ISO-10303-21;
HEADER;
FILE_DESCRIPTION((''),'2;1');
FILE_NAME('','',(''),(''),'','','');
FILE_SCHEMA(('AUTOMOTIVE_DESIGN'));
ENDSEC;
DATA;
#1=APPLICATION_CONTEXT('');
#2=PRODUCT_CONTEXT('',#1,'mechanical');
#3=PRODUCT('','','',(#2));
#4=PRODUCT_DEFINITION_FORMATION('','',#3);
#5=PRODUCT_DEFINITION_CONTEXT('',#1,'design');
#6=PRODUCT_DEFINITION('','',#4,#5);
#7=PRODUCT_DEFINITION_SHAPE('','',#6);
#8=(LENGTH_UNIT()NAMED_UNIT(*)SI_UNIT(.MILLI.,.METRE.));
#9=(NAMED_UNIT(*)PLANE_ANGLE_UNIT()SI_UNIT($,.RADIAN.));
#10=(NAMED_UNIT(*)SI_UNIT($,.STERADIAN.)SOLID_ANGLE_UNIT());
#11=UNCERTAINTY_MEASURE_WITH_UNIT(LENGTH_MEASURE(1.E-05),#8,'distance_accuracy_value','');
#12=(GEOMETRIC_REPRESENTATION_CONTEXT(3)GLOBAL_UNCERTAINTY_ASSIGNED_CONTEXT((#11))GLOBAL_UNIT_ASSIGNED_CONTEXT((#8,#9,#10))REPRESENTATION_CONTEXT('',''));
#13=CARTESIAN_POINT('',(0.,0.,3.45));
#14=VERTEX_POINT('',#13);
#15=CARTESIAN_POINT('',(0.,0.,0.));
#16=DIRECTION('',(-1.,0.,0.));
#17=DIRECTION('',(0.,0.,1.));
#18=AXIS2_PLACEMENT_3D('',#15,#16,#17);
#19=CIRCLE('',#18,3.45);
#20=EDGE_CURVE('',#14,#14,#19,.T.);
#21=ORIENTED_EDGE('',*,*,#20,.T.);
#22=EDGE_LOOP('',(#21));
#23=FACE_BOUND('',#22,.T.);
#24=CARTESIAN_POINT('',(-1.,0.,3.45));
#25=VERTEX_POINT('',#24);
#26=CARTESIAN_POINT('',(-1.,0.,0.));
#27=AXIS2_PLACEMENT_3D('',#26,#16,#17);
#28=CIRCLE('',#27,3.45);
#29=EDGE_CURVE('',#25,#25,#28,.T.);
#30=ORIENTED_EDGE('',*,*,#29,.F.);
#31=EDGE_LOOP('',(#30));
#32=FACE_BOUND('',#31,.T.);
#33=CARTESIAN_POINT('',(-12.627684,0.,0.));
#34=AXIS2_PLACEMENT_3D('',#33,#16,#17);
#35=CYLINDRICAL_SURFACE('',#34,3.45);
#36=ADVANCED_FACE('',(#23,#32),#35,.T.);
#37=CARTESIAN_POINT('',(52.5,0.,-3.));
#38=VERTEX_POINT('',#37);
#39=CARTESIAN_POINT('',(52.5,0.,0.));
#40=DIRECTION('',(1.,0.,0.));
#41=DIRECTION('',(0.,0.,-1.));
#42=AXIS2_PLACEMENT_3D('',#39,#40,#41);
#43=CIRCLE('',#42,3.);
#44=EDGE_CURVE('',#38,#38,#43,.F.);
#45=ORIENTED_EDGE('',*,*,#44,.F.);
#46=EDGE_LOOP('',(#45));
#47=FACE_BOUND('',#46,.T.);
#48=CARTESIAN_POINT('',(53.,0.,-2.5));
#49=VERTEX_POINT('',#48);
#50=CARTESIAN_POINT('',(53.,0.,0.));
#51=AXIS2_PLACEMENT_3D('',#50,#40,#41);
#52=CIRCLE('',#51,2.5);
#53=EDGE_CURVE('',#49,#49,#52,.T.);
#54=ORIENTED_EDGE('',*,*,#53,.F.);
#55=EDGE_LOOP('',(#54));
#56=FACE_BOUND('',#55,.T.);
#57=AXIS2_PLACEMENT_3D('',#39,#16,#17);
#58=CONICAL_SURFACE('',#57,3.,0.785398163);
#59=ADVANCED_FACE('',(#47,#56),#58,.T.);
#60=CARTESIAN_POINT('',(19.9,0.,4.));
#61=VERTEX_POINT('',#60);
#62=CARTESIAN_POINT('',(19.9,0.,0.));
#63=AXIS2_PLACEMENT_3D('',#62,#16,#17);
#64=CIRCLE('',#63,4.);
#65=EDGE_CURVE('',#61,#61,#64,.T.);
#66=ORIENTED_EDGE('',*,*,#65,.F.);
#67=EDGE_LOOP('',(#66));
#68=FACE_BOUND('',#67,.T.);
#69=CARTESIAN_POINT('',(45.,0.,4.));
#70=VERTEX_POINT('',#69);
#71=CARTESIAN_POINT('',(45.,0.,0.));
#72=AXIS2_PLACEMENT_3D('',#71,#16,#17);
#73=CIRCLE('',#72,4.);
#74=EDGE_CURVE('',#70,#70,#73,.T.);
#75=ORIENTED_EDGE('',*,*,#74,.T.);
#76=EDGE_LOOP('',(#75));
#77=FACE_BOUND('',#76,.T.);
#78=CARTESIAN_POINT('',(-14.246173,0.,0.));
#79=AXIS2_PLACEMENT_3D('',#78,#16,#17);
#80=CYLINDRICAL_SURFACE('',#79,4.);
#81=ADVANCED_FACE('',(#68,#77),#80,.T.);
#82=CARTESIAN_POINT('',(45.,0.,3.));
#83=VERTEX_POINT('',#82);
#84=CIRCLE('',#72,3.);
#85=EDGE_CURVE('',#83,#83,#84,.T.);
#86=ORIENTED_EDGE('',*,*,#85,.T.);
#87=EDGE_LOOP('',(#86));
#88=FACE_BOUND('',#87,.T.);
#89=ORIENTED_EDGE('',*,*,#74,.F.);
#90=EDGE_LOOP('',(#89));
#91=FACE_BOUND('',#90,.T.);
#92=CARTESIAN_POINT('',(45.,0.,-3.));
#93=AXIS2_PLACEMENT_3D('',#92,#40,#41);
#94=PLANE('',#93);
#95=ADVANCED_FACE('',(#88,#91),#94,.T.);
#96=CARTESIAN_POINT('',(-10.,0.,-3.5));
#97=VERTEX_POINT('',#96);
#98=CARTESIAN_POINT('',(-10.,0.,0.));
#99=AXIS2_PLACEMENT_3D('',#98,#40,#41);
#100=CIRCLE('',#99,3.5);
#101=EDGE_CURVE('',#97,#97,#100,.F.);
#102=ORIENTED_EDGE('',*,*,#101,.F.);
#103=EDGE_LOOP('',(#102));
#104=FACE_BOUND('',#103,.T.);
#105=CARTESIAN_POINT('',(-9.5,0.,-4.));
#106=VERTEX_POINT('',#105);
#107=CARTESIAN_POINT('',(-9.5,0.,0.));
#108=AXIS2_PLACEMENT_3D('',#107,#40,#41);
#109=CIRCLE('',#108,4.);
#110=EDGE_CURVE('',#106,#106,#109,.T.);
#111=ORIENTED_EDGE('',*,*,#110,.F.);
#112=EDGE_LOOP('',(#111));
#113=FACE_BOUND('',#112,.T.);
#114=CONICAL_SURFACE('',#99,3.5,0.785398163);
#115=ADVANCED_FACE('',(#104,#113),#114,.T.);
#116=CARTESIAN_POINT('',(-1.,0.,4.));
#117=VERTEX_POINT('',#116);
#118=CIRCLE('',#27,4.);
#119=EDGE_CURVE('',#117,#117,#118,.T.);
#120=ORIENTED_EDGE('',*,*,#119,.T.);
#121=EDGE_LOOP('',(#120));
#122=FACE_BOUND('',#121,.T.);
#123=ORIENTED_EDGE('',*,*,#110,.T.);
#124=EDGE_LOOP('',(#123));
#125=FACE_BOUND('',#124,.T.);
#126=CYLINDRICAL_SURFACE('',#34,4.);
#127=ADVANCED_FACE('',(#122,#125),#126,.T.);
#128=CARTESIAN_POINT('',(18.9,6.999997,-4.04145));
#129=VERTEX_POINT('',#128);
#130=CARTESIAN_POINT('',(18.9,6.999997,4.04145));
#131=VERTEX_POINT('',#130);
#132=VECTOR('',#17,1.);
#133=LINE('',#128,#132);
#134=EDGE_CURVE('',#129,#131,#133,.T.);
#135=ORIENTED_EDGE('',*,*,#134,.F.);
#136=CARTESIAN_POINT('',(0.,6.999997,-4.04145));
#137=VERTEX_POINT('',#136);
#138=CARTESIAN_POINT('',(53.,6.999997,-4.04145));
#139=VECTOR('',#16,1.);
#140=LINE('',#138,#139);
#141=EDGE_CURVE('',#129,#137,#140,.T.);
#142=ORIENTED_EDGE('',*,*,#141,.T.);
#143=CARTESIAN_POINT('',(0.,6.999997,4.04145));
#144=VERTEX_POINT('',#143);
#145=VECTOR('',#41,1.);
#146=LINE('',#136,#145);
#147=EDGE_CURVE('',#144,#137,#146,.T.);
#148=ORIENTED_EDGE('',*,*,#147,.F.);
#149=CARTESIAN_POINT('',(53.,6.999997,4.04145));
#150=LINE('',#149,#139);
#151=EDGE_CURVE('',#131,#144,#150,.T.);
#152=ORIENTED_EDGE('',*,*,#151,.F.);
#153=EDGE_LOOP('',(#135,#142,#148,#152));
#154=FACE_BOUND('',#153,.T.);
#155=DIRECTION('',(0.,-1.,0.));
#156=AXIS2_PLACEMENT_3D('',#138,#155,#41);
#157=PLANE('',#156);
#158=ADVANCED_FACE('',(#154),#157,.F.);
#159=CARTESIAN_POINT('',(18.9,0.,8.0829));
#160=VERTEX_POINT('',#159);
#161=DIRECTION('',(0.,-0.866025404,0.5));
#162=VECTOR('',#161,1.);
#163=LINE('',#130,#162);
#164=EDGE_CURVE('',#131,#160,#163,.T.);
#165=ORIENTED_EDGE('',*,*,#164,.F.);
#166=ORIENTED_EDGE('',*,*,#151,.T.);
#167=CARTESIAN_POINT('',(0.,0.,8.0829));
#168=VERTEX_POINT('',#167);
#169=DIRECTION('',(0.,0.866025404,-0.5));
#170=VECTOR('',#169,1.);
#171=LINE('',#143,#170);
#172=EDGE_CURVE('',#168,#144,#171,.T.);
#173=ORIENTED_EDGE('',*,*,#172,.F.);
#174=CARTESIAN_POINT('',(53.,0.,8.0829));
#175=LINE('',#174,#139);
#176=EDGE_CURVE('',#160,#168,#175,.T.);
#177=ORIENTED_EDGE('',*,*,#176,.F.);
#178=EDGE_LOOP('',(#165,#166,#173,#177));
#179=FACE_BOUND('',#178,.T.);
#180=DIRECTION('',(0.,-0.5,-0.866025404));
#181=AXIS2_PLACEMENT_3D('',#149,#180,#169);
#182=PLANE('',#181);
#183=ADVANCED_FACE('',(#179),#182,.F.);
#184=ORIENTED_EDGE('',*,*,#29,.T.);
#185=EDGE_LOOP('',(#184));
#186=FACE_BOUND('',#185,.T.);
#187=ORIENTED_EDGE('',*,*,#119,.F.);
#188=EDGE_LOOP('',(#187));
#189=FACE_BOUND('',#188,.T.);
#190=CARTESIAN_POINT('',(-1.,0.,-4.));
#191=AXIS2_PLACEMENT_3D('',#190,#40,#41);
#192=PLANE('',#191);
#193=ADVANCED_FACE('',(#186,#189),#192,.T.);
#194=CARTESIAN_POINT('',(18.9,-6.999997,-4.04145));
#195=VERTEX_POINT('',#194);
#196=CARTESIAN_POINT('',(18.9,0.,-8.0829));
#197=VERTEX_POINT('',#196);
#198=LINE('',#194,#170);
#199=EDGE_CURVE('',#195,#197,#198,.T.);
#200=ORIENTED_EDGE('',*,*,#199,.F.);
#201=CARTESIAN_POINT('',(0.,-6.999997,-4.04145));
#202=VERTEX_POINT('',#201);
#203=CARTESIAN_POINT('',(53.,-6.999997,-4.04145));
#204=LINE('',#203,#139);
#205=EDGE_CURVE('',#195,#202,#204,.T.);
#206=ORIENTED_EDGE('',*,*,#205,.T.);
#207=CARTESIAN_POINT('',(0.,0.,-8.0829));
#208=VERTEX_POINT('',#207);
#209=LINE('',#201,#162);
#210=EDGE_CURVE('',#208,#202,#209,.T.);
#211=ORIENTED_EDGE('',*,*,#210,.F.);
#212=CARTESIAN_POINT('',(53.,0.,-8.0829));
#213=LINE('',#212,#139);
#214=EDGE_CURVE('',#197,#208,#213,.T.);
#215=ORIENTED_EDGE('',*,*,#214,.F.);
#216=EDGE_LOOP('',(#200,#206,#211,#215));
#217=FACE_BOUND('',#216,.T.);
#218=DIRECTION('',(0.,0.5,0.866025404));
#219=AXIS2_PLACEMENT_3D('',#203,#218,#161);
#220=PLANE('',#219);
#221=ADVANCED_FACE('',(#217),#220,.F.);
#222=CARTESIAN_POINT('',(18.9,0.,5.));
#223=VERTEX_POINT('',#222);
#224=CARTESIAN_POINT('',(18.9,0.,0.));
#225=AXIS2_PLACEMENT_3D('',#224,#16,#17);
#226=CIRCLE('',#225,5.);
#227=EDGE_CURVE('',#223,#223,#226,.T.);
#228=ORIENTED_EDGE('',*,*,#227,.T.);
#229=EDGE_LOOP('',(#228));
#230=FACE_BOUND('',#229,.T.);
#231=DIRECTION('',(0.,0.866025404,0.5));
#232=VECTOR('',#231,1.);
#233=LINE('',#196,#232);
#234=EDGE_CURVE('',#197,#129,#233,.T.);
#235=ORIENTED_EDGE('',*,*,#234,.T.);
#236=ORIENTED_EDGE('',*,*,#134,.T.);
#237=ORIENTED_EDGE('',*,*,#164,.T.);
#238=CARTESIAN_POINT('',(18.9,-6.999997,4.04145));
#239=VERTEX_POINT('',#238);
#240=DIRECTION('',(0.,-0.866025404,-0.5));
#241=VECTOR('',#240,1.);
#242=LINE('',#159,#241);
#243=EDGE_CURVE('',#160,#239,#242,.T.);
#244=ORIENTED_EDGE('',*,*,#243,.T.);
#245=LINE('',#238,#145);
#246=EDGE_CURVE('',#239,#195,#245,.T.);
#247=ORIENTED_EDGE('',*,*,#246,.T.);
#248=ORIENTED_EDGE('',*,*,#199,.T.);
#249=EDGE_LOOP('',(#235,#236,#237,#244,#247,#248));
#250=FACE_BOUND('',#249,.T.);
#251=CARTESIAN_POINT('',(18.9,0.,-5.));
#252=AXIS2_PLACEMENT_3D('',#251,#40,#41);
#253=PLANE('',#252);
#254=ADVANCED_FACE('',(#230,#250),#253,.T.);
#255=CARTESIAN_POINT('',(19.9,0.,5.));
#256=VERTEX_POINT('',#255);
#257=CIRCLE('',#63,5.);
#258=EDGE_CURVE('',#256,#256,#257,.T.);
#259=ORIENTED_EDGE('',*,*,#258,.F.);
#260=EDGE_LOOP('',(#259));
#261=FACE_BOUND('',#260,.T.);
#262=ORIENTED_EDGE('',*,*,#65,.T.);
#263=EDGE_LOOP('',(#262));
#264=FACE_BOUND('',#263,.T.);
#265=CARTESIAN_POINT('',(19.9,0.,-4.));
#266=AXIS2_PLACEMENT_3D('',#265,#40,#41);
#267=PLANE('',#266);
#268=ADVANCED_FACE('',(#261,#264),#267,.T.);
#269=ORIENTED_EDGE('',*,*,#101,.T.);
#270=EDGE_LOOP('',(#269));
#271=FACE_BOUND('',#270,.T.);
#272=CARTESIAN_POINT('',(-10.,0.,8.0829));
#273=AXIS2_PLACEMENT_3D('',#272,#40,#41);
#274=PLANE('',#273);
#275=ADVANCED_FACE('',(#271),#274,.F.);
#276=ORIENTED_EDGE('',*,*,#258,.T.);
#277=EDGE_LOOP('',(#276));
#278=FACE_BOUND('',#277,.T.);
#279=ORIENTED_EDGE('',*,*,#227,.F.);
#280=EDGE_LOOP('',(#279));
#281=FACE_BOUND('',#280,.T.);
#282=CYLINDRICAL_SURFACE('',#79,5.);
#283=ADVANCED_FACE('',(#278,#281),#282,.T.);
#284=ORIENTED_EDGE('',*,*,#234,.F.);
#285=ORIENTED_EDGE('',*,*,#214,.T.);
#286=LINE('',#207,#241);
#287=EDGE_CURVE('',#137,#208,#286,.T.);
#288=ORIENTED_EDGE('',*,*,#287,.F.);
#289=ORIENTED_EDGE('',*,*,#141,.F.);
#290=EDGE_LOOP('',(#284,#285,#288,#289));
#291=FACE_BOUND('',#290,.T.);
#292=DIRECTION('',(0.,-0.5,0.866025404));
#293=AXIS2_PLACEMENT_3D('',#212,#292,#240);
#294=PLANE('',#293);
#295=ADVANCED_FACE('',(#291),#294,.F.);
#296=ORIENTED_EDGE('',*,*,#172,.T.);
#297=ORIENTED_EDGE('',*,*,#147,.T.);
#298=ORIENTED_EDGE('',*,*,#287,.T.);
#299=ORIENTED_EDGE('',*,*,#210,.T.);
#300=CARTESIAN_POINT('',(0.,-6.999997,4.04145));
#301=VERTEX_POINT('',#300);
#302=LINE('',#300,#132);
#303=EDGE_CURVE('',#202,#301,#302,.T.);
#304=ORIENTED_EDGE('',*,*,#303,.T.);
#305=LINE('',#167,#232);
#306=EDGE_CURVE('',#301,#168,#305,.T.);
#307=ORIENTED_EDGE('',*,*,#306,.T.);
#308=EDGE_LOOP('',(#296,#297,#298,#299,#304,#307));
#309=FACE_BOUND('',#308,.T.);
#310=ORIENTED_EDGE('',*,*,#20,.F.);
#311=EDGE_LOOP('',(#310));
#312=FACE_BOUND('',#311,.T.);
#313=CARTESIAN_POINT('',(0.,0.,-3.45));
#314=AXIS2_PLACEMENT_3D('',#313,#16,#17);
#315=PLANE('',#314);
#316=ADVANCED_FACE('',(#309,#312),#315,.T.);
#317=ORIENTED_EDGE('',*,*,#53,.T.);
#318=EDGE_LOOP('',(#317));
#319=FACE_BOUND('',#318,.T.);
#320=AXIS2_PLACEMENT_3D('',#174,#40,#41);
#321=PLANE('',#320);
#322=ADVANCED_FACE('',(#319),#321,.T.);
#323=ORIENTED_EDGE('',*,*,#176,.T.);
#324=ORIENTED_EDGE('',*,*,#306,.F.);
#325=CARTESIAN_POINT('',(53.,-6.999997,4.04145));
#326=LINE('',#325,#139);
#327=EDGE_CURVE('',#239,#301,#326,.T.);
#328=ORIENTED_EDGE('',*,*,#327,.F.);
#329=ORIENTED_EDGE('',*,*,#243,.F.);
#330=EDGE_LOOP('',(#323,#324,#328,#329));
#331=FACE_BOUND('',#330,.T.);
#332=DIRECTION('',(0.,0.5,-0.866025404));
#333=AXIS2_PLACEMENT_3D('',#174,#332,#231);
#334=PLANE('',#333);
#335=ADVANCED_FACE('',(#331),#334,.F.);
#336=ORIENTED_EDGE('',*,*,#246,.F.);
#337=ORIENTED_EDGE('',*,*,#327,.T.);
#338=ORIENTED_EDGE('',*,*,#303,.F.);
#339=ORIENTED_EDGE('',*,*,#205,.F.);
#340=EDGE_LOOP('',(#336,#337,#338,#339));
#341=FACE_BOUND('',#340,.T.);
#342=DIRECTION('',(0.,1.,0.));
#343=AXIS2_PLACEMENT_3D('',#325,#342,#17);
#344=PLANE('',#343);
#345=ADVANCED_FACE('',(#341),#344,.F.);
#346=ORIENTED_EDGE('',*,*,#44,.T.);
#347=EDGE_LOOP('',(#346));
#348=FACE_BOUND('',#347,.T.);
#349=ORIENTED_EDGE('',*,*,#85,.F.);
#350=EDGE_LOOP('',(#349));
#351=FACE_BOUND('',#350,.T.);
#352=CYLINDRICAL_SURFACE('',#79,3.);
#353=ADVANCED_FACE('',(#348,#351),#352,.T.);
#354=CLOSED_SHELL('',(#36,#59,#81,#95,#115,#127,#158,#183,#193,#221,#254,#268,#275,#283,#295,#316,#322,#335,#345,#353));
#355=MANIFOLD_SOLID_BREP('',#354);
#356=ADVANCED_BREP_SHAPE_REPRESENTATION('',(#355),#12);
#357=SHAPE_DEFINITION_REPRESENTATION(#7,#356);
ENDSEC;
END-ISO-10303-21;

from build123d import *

# Parameters (mm, degrees)
BOSS_EXTRUDE1_START = -10
BOSS_EXTRUDE1_DEPTH = 63
CHAMFER1_SIZE       = 0.5


# Read off the part's stored shape, not the designer's step: Boss-Extrude1
with BuildPart() as part:
    # Boss-Extrude1 outline → Boss-Extrude1 (new body)
    with BuildSketch(Plane(origin=(0, 0, 0), x_dir=(0, 0, -1), z_dir=(1, 0, 0)).offset(BOSS_EXTRUDE1_START)):
        Polygon((-4.04145, 6.999996736), (-8.0829, 0), (-4.04145, -6.999996736), (4.04145, -6.999996736), (8.0829, 0), (4.04145, 6.999996736), align=None)
    extrude(amount=BOSS_EXTRUDE1_DEPTH)

    # Sketch2 → Cut-Revolve1 (revolve, cut)
    with BuildSketch(Plane(origin=(0, 0, 0), x_dir=(1, 0, 0), z_dir=(0, 1, 0)), mode=Mode.PRIVATE) as cut_revolve1_sk:
        Polygon((0, 8.0829), (-10, 8.0829), (-10, 4), (-1, 4), (-1, 3.45), (0, 3.45), align=None)
    revolve(cut_revolve1_sk.sketch.rotate(Axis((-12.627683811, 0, 0), (1, 0, 0)), 180), axis=Axis((-12.627683811, 0, 0), (1, 0, 0)), mode=Mode.SUBTRACT)

    # Sketch3 → Cut-Revolve2 (revolve, cut)
    with BuildSketch(Plane(origin=(0, 0, 0), x_dir=(1, 0, 0), z_dir=(0, 1, 0)), mode=Mode.PRIVATE) as cut_revolve2_sk:
        Polygon((53, 8.0829), (53, 3), (45, 3), (45, 4), (19.9, 4), (19.9, 5), (18.9, 5), (18.9, 8.0829), align=None)
    revolve(cut_revolve2_sk.sketch.rotate(Axis((-14.24617289, 0, 0), (1, 0, 0)), 180), axis=Axis((-14.24617289, 0, 0), (1, 0, 0)), mode=Mode.SUBTRACT)

    # Chamfer1
    chamfer1_edges = [part.edges().sort_by_distance(p)[0] for p in [
        (-10, 0, -4),
        (53, 0, -3),
    ]]
    chamfer(chamfer1_edges, length=CHAMFER1_SIZE)


solid = part.part
